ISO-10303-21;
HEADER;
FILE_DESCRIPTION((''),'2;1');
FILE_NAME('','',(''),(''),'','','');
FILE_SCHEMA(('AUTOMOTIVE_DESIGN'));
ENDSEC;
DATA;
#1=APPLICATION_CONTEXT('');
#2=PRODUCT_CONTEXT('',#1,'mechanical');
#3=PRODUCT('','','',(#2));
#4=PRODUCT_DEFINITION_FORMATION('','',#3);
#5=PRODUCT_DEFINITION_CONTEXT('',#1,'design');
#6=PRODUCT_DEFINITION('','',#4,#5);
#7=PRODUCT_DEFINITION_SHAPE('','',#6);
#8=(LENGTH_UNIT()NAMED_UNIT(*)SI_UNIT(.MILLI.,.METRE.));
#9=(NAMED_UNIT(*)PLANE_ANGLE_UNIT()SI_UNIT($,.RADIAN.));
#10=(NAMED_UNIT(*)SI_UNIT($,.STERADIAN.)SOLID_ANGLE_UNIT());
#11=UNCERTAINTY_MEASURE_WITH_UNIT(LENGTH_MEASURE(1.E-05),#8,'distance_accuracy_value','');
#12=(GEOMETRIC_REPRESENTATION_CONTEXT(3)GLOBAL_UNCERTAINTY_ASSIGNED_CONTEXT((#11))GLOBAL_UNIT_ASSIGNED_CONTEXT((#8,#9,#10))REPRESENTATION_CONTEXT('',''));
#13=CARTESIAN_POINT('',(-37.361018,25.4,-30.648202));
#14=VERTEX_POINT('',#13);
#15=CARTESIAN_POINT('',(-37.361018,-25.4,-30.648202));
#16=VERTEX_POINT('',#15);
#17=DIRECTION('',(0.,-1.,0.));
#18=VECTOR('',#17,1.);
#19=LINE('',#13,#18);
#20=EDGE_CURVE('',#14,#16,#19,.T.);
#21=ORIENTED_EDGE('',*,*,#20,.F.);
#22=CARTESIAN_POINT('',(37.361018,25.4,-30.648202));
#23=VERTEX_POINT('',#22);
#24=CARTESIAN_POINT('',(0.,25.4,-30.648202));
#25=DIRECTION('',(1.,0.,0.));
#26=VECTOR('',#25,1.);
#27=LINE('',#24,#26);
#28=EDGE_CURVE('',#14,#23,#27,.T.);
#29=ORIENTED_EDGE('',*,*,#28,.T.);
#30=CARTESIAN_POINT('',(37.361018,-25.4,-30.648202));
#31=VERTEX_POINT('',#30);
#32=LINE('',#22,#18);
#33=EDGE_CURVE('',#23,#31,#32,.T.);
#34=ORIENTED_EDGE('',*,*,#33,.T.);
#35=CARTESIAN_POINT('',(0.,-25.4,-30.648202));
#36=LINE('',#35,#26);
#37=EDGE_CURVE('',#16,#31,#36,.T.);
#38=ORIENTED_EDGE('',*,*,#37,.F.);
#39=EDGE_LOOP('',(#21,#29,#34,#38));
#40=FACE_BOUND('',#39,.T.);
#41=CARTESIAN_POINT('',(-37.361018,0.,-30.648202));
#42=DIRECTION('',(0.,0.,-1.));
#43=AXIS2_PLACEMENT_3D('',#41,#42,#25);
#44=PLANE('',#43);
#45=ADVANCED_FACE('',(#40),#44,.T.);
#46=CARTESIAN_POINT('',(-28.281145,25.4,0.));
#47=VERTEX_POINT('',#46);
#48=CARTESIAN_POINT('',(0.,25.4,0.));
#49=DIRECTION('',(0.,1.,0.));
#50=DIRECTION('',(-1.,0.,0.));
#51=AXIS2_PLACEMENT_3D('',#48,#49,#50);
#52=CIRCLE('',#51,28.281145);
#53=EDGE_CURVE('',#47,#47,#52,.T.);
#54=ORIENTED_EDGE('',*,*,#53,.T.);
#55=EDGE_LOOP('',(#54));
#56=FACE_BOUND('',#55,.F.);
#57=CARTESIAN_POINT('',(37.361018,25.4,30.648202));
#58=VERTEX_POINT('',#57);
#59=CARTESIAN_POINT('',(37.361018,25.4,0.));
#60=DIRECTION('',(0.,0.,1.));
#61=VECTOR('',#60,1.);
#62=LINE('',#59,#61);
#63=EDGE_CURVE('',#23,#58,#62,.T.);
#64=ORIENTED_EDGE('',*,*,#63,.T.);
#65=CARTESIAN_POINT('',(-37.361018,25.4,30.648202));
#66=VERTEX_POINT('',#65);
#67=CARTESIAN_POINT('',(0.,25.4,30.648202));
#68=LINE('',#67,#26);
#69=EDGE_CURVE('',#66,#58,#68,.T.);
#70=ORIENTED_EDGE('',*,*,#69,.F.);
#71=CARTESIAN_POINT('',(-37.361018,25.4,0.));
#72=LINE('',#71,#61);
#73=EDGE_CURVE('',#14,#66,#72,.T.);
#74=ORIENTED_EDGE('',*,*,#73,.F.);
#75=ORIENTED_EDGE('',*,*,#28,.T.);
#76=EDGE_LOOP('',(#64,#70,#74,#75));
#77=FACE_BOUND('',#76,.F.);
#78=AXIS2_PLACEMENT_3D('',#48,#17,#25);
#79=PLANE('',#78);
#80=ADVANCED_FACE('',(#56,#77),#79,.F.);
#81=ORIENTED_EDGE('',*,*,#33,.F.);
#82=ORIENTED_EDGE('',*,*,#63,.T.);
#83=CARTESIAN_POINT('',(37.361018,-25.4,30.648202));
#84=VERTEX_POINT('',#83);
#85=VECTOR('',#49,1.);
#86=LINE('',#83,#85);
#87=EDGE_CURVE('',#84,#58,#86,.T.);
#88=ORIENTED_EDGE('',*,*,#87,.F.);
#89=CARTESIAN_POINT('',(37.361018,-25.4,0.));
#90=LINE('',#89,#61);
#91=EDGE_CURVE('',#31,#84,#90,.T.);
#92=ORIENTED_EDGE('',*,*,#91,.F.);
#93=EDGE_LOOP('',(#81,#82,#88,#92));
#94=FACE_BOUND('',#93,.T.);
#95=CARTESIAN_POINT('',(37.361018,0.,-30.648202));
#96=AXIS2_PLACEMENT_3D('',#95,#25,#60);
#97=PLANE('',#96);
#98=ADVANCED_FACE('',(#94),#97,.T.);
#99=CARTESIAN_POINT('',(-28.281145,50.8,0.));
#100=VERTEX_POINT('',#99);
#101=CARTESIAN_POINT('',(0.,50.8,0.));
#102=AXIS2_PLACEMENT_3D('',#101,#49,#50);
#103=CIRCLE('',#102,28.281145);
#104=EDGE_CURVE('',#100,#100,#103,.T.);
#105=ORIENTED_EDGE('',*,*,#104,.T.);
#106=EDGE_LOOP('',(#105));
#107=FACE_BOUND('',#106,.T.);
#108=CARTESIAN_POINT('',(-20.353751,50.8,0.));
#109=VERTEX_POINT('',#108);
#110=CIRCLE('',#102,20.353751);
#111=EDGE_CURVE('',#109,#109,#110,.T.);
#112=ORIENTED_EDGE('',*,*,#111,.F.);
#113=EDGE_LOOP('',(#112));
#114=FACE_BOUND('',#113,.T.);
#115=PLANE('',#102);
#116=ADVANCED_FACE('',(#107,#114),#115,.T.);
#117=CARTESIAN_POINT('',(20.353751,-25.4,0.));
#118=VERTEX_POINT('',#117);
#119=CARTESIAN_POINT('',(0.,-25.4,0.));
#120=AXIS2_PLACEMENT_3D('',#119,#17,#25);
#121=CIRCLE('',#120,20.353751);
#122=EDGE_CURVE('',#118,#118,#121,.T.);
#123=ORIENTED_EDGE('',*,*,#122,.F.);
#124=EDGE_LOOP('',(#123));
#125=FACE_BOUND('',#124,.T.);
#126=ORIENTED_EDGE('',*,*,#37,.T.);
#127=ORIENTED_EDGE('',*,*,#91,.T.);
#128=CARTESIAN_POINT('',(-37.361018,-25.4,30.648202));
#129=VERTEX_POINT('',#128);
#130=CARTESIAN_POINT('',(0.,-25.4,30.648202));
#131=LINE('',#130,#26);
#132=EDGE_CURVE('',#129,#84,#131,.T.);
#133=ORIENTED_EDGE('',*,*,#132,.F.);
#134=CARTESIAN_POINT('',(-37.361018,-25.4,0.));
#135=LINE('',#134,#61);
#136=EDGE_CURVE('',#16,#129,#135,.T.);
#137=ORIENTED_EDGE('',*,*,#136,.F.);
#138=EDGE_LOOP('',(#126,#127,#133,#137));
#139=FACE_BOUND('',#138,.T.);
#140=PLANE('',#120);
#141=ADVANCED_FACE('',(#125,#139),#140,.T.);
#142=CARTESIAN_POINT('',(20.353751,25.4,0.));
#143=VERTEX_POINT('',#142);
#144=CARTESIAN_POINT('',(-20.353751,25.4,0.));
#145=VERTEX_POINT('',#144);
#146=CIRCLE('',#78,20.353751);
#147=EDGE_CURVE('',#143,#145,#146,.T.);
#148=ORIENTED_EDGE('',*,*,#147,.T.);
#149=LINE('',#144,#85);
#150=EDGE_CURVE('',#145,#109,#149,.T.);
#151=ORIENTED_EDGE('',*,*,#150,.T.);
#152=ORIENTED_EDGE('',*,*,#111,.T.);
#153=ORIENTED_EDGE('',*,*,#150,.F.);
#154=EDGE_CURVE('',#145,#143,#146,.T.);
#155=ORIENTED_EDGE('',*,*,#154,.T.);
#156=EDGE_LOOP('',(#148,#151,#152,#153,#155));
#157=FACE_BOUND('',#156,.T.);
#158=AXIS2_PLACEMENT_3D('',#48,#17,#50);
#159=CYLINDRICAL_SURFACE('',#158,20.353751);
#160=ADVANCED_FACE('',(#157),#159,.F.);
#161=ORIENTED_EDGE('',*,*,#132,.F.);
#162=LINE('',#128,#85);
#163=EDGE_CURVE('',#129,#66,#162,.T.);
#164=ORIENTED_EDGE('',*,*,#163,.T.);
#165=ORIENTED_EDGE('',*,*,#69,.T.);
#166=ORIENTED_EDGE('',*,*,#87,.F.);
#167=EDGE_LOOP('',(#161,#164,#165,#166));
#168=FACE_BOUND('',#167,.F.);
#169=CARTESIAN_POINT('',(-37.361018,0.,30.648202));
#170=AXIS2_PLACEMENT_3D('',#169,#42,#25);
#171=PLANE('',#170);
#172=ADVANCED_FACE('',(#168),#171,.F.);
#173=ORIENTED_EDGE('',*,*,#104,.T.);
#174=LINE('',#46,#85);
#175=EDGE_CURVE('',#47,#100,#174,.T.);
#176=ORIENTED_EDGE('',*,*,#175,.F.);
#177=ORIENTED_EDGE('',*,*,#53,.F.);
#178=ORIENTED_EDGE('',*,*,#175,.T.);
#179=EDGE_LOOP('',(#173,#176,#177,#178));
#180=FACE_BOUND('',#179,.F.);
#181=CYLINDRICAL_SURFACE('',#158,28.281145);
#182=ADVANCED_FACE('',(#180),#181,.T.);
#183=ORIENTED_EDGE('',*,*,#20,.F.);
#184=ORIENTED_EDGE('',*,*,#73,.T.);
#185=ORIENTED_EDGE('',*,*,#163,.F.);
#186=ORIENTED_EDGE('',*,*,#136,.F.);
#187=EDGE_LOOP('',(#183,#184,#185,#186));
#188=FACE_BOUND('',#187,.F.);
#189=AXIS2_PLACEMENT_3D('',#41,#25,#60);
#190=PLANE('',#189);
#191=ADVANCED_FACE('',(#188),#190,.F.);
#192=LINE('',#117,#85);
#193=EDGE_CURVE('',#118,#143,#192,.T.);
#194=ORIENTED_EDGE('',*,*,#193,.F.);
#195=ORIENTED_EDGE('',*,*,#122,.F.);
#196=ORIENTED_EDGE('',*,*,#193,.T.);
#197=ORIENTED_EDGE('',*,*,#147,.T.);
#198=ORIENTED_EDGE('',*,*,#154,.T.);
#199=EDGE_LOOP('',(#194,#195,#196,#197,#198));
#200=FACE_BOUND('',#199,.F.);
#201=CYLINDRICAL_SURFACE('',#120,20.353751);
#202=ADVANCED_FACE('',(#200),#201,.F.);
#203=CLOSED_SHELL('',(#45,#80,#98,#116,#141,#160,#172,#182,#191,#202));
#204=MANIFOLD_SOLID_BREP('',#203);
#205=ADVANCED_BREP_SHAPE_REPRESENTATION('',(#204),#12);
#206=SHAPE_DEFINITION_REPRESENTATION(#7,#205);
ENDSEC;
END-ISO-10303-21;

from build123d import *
from build123d import SkipClean  # not in build123d's __all__

# Parameters (mm, degrees)
F0_W     = 74.7220367193
F0_H     = 61.2964034081
F1_DEPTH = 25.4
F2_R     = 20.3537507695
F3_DEPTH = 50.801
F4_R     = 28.2811450825
F4_R_2   = 20.3537507695
F5_DEPTH = 25.4


with BuildPart() as f1:
    # F0 (on Front) → F1 (new body, symmetric)
    with BuildSketch(Plane.XZ):
        Rectangle(F0_W, F0_H)
    extrude(amount=F1_DEPTH, both=True)

    # F2 (on face) → F3 (cut, through all)
    with BuildSketch(Plane.XZ.offset(25.4)):
        Circle(F2_R)
    extrude(amount=-F3_DEPTH, mode=Mode.SUBTRACT)

    # F4 (on face) → F5 (join)
    with BuildSketch(Plane(origin=(0, 25.4, 0), x_dir=(-1, 0, 0), z_dir=(0, 1, 0))):
        Circle(F4_R)
        Circle(F4_R_2, mode=Mode.SUBTRACT)
    with SkipClean():  # cleaning this boolean's faces spoils the solid; the shape is the same uncleaned
        extrude(amount=F5_DEPTH)


solid = f1.part
